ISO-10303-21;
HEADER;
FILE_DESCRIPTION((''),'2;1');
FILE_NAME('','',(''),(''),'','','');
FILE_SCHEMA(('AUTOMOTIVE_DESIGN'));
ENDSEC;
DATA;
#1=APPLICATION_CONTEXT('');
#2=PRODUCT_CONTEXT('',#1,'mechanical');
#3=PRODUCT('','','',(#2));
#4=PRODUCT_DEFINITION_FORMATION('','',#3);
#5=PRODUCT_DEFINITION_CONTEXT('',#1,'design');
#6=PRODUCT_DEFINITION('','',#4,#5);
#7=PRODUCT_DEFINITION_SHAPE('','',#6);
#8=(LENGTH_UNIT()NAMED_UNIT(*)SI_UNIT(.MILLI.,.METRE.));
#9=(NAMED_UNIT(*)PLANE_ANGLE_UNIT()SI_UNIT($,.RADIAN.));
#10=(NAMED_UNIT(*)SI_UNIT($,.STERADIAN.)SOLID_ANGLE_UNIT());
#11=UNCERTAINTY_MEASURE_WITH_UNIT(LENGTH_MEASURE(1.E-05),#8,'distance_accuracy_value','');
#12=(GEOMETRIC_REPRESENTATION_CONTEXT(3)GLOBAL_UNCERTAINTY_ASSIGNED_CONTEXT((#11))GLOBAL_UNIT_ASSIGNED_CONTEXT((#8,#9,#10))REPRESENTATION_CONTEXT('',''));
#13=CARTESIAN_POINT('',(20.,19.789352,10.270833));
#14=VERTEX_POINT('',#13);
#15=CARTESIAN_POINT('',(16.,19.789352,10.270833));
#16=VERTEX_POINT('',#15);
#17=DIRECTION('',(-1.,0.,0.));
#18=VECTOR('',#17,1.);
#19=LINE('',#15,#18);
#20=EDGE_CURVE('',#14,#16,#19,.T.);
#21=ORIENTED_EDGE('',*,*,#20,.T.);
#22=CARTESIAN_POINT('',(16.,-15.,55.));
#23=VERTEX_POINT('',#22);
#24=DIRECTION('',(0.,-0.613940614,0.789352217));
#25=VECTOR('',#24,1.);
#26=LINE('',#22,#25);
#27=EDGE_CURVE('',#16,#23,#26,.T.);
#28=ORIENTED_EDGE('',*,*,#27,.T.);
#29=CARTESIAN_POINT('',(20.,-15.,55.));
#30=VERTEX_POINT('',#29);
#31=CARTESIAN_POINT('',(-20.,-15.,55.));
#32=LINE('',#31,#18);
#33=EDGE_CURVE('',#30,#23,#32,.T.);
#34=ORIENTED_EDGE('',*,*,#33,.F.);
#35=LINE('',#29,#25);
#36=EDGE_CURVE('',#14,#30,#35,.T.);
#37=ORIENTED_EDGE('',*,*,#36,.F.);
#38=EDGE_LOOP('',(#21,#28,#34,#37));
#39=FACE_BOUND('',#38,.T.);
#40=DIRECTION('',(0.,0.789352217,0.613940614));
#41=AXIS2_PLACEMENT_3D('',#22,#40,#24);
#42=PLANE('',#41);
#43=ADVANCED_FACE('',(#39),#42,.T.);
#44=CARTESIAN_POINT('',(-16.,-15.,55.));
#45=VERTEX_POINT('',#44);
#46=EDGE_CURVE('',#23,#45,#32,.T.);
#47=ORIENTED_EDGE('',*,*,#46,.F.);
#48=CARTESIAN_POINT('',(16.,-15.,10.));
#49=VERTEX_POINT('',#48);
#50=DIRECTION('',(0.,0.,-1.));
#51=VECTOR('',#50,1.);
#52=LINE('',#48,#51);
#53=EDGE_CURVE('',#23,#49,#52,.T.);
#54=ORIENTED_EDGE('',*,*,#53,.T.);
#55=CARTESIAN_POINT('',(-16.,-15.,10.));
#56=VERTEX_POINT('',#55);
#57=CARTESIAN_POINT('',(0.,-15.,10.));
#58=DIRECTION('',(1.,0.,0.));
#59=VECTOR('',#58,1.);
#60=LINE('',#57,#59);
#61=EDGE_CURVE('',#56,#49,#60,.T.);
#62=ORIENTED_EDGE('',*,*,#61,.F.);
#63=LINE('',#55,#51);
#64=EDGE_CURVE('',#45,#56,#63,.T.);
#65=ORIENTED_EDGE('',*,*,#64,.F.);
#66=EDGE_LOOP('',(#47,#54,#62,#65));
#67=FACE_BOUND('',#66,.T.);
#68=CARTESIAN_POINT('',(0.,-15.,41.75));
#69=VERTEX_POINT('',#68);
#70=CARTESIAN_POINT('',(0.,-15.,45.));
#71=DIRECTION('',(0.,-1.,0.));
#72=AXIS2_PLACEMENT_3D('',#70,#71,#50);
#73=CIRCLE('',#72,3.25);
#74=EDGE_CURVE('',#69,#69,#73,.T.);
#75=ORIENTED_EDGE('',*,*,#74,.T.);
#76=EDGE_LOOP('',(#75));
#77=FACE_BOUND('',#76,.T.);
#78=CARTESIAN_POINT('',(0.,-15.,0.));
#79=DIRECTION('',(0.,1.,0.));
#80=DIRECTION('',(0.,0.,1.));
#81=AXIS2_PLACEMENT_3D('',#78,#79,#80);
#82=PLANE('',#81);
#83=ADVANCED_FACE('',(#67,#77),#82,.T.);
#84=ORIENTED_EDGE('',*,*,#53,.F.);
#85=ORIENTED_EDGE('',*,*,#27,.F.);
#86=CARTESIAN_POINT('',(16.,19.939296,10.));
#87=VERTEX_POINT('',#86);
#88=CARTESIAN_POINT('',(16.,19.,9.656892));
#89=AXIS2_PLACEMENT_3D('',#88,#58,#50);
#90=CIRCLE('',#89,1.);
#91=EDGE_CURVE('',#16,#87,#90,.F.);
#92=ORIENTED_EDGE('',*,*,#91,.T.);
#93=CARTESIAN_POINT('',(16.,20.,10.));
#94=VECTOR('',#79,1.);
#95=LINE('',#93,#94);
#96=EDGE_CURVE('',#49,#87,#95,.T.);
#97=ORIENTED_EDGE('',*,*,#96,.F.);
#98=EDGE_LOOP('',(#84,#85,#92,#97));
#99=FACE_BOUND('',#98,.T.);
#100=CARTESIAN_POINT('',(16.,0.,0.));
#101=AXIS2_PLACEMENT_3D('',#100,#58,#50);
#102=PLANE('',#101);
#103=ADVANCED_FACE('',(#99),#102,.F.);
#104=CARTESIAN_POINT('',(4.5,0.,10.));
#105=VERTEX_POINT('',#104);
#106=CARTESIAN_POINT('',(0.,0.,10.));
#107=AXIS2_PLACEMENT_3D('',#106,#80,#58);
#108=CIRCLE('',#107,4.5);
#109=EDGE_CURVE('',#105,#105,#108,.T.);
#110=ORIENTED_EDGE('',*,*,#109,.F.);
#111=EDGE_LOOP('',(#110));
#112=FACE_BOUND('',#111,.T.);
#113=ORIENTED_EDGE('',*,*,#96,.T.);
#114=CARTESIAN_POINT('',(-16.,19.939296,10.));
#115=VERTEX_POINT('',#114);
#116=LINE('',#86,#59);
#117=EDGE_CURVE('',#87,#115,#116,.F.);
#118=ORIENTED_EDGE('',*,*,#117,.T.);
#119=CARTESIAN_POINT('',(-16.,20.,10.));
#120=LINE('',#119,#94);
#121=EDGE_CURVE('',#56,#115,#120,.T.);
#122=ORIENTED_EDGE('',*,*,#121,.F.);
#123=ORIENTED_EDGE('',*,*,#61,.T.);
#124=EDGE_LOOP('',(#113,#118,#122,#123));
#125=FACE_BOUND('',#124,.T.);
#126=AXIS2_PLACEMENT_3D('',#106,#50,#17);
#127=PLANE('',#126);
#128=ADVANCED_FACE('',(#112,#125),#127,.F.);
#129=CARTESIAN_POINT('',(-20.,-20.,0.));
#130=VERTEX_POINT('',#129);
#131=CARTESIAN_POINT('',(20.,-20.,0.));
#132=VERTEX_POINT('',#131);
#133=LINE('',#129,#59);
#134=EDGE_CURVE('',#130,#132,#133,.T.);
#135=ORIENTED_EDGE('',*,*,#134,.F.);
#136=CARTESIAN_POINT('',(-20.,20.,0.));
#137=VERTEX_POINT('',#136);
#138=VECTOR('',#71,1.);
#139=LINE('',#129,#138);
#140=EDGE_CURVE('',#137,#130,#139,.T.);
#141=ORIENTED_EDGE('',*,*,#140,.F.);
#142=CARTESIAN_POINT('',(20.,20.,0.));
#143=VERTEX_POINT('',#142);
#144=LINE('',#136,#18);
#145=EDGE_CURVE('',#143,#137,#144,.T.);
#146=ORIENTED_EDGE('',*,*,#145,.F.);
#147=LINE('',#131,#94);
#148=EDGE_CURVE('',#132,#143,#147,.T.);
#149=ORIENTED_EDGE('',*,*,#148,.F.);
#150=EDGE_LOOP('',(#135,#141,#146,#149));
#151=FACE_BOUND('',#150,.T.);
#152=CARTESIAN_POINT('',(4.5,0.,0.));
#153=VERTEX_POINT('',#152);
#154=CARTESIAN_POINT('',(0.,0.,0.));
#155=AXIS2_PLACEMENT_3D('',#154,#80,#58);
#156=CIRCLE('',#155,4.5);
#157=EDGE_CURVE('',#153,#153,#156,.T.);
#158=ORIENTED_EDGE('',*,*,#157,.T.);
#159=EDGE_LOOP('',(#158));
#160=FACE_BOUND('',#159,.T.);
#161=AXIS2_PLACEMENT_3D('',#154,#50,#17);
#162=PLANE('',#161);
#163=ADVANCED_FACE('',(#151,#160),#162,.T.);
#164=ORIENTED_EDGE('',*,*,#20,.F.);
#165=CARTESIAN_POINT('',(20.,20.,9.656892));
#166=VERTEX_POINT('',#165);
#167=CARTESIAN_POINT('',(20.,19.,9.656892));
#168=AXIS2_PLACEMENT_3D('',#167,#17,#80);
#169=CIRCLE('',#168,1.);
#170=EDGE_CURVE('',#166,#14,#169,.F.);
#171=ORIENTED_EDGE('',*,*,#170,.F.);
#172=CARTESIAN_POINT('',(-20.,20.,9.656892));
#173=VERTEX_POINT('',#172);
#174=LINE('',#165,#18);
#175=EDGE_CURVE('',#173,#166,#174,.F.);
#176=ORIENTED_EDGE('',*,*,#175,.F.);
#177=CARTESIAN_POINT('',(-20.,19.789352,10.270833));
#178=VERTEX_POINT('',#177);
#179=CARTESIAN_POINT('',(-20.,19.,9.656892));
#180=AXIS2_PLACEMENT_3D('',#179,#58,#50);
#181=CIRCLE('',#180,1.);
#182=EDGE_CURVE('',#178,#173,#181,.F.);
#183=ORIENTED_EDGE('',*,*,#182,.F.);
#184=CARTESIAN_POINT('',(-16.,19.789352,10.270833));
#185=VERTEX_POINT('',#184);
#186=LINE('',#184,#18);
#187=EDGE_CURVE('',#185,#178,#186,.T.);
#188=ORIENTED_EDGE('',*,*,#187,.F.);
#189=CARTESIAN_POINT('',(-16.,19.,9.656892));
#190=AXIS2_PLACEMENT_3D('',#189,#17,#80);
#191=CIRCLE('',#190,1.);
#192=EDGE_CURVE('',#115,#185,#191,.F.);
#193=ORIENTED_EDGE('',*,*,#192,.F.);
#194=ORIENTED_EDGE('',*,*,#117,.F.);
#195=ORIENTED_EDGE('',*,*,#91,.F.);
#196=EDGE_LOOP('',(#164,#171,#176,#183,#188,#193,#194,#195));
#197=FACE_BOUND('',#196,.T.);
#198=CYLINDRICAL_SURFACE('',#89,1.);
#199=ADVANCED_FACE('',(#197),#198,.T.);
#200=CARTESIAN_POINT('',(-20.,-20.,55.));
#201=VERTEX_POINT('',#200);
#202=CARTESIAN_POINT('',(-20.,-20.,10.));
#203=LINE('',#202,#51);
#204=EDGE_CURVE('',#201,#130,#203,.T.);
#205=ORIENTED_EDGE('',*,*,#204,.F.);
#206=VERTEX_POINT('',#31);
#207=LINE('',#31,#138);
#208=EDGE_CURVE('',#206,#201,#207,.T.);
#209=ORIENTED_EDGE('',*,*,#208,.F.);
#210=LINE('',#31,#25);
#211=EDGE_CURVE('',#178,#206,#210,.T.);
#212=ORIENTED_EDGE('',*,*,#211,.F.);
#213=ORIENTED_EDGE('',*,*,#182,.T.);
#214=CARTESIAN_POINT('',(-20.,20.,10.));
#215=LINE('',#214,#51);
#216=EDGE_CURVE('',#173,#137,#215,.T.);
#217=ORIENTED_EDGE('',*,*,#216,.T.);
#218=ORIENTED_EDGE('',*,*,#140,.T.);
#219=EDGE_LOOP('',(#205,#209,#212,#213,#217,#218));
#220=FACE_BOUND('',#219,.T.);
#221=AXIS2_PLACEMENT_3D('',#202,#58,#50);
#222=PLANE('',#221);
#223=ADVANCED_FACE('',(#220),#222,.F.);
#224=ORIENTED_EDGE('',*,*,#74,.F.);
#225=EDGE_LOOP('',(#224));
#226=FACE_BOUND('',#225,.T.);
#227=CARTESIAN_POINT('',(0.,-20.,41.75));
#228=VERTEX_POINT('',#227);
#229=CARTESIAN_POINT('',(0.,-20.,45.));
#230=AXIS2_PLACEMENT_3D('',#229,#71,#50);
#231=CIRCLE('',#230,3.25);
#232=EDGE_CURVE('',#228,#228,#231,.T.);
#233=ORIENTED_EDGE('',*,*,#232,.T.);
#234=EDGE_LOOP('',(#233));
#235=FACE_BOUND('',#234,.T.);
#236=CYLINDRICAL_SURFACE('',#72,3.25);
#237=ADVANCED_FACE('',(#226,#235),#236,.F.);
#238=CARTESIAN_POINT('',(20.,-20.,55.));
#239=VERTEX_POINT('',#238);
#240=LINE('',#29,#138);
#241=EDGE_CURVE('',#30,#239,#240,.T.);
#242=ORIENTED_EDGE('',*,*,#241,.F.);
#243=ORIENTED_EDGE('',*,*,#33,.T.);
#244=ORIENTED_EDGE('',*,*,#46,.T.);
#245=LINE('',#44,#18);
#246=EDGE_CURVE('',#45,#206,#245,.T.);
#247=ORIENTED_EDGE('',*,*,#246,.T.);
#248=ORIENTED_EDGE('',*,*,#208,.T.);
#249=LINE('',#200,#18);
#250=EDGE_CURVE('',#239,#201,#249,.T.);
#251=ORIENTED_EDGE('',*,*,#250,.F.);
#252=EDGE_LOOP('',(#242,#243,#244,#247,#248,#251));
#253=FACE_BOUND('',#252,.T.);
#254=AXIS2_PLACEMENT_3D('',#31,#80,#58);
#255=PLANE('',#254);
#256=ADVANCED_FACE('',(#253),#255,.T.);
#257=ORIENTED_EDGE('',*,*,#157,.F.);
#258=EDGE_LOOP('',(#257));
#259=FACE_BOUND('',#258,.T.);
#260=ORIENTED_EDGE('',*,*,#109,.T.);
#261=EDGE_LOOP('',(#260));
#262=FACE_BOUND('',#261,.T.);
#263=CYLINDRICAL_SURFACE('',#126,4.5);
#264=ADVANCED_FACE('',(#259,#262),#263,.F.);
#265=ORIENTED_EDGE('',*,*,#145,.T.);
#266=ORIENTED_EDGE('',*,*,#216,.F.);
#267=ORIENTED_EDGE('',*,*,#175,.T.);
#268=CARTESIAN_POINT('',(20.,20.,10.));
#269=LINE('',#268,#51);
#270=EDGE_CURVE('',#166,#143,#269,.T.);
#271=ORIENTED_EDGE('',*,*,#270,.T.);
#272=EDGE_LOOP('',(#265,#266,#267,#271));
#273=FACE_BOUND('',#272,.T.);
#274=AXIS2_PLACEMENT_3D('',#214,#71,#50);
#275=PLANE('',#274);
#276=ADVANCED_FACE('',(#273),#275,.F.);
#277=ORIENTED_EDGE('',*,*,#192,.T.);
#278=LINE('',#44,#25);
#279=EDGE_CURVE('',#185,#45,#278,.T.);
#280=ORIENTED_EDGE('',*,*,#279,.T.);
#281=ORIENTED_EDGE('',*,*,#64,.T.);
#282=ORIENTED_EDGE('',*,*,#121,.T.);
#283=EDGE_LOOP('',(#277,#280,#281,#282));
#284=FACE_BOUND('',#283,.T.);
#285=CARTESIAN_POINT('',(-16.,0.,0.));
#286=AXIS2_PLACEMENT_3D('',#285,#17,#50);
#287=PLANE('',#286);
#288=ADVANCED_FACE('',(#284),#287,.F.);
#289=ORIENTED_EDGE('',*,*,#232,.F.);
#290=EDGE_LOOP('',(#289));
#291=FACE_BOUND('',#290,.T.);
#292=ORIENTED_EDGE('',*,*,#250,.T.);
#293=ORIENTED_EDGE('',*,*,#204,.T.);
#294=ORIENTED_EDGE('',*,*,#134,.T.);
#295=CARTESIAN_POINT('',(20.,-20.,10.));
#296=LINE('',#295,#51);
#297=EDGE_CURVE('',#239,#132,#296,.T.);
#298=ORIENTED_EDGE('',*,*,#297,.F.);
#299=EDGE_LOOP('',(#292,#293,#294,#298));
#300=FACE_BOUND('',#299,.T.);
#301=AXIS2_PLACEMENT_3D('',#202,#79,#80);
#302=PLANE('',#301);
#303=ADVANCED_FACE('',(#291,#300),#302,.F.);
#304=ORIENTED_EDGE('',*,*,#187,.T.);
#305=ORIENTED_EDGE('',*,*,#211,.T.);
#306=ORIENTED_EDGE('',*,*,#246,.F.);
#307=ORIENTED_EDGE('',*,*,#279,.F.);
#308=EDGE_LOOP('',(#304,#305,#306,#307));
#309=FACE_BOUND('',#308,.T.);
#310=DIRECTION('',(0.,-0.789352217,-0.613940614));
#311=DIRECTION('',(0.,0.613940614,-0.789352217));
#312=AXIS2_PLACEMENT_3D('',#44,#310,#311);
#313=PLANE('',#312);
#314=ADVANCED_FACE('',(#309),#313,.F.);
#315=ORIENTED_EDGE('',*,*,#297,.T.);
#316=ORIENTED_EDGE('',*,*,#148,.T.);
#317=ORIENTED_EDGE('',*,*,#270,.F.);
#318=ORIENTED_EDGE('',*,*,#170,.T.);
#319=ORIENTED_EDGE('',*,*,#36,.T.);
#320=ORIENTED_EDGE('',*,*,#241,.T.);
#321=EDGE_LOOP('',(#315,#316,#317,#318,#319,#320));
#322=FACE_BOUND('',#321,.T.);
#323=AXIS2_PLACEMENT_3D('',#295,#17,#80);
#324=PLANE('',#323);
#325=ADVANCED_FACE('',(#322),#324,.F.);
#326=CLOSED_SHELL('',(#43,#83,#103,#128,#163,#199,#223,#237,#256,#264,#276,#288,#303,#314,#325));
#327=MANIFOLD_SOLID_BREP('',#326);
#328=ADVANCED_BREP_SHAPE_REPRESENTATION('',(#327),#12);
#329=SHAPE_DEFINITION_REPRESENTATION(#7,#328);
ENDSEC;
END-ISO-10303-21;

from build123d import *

# Parameters (mm, degrees)
CROQUIS1_W              = 40
CROQUIS1_H              = 40
CROQUIS1_R              = 4.5
SALIENTE_EXTRUIR1_DEPTH = 10
CROQUIS2_W              = 40
CROQUIS2_H              = 55
CROQUIS2_R              = 3.25
SALIENTE_EXTRUIR2_DEPTH = 5
SALIENTE_EXTRUIR3_DEPTH = 4
REDONDEO1_START         = -21
REDONDEO1_DEPTH         = 42


with BuildPart() as part:
    # Croquis1 → Saliente-Extruir1 (new body)
    with BuildSketch(Plane.XY):
        Rectangle(CROQUIS1_W, CROQUIS1_H)
        Circle(CROQUIS1_R, mode=Mode.SUBTRACT)
    extrude(amount=SALIENTE_EXTRUIR1_DEPTH)

    # Croquis2 → Saliente-Extruir2 (add)
    with BuildSketch(Plane.XZ.offset(20)):
        with Locations((0, 27.5)):
            Rectangle(CROQUIS2_W, CROQUIS2_H)
        with Locations(Location((0, 45, 0), (0, 0, 270))):
            Circle(CROQUIS2_R, mode=Mode.SUBTRACT)
    extrude(amount=-SALIENTE_EXTRUIR2_DEPTH)

    # Croquis3 → Saliente-Extruir3 (add)
    with BuildSketch(Plane(origin=(20, 0, 0), x_dir=(0, 0, -1), z_dir=(1, 0, 0))):
        Polygon((-55, -15), (-10, 20), (-10, -15), align=None)
    saliente_extruir3 = extrude(amount=-SALIENTE_EXTRUIR3_DEPTH)

    # Simetría1: Saliente-Extruir3 across plane
    add(saliente_extruir3.mirror(Plane(origin=(0, 0, 0), x_dir=(0, 0, 1), z_dir=(1, 0, 0))))

    # Redondeo1: read off the stored shape, not the designer's step
    # Redondeo1 outline → Redondeo1 (cut)
    with BuildSketch(Plane.YZ.offset(REDONDEO1_START)):
        with BuildLine():
            Line((20, 9.65689225), (20, 10))
            Line((20, 10), (19.789352217, 10.270832863))
            ThreePointArc((19.789352217, 10.270832863), (19.945873199, 9.981428675), (20, 9.65689225))
        make_face()
    extrude(amount=REDONDEO1_DEPTH, mode=Mode.SUBTRACT)


solid = part.part
